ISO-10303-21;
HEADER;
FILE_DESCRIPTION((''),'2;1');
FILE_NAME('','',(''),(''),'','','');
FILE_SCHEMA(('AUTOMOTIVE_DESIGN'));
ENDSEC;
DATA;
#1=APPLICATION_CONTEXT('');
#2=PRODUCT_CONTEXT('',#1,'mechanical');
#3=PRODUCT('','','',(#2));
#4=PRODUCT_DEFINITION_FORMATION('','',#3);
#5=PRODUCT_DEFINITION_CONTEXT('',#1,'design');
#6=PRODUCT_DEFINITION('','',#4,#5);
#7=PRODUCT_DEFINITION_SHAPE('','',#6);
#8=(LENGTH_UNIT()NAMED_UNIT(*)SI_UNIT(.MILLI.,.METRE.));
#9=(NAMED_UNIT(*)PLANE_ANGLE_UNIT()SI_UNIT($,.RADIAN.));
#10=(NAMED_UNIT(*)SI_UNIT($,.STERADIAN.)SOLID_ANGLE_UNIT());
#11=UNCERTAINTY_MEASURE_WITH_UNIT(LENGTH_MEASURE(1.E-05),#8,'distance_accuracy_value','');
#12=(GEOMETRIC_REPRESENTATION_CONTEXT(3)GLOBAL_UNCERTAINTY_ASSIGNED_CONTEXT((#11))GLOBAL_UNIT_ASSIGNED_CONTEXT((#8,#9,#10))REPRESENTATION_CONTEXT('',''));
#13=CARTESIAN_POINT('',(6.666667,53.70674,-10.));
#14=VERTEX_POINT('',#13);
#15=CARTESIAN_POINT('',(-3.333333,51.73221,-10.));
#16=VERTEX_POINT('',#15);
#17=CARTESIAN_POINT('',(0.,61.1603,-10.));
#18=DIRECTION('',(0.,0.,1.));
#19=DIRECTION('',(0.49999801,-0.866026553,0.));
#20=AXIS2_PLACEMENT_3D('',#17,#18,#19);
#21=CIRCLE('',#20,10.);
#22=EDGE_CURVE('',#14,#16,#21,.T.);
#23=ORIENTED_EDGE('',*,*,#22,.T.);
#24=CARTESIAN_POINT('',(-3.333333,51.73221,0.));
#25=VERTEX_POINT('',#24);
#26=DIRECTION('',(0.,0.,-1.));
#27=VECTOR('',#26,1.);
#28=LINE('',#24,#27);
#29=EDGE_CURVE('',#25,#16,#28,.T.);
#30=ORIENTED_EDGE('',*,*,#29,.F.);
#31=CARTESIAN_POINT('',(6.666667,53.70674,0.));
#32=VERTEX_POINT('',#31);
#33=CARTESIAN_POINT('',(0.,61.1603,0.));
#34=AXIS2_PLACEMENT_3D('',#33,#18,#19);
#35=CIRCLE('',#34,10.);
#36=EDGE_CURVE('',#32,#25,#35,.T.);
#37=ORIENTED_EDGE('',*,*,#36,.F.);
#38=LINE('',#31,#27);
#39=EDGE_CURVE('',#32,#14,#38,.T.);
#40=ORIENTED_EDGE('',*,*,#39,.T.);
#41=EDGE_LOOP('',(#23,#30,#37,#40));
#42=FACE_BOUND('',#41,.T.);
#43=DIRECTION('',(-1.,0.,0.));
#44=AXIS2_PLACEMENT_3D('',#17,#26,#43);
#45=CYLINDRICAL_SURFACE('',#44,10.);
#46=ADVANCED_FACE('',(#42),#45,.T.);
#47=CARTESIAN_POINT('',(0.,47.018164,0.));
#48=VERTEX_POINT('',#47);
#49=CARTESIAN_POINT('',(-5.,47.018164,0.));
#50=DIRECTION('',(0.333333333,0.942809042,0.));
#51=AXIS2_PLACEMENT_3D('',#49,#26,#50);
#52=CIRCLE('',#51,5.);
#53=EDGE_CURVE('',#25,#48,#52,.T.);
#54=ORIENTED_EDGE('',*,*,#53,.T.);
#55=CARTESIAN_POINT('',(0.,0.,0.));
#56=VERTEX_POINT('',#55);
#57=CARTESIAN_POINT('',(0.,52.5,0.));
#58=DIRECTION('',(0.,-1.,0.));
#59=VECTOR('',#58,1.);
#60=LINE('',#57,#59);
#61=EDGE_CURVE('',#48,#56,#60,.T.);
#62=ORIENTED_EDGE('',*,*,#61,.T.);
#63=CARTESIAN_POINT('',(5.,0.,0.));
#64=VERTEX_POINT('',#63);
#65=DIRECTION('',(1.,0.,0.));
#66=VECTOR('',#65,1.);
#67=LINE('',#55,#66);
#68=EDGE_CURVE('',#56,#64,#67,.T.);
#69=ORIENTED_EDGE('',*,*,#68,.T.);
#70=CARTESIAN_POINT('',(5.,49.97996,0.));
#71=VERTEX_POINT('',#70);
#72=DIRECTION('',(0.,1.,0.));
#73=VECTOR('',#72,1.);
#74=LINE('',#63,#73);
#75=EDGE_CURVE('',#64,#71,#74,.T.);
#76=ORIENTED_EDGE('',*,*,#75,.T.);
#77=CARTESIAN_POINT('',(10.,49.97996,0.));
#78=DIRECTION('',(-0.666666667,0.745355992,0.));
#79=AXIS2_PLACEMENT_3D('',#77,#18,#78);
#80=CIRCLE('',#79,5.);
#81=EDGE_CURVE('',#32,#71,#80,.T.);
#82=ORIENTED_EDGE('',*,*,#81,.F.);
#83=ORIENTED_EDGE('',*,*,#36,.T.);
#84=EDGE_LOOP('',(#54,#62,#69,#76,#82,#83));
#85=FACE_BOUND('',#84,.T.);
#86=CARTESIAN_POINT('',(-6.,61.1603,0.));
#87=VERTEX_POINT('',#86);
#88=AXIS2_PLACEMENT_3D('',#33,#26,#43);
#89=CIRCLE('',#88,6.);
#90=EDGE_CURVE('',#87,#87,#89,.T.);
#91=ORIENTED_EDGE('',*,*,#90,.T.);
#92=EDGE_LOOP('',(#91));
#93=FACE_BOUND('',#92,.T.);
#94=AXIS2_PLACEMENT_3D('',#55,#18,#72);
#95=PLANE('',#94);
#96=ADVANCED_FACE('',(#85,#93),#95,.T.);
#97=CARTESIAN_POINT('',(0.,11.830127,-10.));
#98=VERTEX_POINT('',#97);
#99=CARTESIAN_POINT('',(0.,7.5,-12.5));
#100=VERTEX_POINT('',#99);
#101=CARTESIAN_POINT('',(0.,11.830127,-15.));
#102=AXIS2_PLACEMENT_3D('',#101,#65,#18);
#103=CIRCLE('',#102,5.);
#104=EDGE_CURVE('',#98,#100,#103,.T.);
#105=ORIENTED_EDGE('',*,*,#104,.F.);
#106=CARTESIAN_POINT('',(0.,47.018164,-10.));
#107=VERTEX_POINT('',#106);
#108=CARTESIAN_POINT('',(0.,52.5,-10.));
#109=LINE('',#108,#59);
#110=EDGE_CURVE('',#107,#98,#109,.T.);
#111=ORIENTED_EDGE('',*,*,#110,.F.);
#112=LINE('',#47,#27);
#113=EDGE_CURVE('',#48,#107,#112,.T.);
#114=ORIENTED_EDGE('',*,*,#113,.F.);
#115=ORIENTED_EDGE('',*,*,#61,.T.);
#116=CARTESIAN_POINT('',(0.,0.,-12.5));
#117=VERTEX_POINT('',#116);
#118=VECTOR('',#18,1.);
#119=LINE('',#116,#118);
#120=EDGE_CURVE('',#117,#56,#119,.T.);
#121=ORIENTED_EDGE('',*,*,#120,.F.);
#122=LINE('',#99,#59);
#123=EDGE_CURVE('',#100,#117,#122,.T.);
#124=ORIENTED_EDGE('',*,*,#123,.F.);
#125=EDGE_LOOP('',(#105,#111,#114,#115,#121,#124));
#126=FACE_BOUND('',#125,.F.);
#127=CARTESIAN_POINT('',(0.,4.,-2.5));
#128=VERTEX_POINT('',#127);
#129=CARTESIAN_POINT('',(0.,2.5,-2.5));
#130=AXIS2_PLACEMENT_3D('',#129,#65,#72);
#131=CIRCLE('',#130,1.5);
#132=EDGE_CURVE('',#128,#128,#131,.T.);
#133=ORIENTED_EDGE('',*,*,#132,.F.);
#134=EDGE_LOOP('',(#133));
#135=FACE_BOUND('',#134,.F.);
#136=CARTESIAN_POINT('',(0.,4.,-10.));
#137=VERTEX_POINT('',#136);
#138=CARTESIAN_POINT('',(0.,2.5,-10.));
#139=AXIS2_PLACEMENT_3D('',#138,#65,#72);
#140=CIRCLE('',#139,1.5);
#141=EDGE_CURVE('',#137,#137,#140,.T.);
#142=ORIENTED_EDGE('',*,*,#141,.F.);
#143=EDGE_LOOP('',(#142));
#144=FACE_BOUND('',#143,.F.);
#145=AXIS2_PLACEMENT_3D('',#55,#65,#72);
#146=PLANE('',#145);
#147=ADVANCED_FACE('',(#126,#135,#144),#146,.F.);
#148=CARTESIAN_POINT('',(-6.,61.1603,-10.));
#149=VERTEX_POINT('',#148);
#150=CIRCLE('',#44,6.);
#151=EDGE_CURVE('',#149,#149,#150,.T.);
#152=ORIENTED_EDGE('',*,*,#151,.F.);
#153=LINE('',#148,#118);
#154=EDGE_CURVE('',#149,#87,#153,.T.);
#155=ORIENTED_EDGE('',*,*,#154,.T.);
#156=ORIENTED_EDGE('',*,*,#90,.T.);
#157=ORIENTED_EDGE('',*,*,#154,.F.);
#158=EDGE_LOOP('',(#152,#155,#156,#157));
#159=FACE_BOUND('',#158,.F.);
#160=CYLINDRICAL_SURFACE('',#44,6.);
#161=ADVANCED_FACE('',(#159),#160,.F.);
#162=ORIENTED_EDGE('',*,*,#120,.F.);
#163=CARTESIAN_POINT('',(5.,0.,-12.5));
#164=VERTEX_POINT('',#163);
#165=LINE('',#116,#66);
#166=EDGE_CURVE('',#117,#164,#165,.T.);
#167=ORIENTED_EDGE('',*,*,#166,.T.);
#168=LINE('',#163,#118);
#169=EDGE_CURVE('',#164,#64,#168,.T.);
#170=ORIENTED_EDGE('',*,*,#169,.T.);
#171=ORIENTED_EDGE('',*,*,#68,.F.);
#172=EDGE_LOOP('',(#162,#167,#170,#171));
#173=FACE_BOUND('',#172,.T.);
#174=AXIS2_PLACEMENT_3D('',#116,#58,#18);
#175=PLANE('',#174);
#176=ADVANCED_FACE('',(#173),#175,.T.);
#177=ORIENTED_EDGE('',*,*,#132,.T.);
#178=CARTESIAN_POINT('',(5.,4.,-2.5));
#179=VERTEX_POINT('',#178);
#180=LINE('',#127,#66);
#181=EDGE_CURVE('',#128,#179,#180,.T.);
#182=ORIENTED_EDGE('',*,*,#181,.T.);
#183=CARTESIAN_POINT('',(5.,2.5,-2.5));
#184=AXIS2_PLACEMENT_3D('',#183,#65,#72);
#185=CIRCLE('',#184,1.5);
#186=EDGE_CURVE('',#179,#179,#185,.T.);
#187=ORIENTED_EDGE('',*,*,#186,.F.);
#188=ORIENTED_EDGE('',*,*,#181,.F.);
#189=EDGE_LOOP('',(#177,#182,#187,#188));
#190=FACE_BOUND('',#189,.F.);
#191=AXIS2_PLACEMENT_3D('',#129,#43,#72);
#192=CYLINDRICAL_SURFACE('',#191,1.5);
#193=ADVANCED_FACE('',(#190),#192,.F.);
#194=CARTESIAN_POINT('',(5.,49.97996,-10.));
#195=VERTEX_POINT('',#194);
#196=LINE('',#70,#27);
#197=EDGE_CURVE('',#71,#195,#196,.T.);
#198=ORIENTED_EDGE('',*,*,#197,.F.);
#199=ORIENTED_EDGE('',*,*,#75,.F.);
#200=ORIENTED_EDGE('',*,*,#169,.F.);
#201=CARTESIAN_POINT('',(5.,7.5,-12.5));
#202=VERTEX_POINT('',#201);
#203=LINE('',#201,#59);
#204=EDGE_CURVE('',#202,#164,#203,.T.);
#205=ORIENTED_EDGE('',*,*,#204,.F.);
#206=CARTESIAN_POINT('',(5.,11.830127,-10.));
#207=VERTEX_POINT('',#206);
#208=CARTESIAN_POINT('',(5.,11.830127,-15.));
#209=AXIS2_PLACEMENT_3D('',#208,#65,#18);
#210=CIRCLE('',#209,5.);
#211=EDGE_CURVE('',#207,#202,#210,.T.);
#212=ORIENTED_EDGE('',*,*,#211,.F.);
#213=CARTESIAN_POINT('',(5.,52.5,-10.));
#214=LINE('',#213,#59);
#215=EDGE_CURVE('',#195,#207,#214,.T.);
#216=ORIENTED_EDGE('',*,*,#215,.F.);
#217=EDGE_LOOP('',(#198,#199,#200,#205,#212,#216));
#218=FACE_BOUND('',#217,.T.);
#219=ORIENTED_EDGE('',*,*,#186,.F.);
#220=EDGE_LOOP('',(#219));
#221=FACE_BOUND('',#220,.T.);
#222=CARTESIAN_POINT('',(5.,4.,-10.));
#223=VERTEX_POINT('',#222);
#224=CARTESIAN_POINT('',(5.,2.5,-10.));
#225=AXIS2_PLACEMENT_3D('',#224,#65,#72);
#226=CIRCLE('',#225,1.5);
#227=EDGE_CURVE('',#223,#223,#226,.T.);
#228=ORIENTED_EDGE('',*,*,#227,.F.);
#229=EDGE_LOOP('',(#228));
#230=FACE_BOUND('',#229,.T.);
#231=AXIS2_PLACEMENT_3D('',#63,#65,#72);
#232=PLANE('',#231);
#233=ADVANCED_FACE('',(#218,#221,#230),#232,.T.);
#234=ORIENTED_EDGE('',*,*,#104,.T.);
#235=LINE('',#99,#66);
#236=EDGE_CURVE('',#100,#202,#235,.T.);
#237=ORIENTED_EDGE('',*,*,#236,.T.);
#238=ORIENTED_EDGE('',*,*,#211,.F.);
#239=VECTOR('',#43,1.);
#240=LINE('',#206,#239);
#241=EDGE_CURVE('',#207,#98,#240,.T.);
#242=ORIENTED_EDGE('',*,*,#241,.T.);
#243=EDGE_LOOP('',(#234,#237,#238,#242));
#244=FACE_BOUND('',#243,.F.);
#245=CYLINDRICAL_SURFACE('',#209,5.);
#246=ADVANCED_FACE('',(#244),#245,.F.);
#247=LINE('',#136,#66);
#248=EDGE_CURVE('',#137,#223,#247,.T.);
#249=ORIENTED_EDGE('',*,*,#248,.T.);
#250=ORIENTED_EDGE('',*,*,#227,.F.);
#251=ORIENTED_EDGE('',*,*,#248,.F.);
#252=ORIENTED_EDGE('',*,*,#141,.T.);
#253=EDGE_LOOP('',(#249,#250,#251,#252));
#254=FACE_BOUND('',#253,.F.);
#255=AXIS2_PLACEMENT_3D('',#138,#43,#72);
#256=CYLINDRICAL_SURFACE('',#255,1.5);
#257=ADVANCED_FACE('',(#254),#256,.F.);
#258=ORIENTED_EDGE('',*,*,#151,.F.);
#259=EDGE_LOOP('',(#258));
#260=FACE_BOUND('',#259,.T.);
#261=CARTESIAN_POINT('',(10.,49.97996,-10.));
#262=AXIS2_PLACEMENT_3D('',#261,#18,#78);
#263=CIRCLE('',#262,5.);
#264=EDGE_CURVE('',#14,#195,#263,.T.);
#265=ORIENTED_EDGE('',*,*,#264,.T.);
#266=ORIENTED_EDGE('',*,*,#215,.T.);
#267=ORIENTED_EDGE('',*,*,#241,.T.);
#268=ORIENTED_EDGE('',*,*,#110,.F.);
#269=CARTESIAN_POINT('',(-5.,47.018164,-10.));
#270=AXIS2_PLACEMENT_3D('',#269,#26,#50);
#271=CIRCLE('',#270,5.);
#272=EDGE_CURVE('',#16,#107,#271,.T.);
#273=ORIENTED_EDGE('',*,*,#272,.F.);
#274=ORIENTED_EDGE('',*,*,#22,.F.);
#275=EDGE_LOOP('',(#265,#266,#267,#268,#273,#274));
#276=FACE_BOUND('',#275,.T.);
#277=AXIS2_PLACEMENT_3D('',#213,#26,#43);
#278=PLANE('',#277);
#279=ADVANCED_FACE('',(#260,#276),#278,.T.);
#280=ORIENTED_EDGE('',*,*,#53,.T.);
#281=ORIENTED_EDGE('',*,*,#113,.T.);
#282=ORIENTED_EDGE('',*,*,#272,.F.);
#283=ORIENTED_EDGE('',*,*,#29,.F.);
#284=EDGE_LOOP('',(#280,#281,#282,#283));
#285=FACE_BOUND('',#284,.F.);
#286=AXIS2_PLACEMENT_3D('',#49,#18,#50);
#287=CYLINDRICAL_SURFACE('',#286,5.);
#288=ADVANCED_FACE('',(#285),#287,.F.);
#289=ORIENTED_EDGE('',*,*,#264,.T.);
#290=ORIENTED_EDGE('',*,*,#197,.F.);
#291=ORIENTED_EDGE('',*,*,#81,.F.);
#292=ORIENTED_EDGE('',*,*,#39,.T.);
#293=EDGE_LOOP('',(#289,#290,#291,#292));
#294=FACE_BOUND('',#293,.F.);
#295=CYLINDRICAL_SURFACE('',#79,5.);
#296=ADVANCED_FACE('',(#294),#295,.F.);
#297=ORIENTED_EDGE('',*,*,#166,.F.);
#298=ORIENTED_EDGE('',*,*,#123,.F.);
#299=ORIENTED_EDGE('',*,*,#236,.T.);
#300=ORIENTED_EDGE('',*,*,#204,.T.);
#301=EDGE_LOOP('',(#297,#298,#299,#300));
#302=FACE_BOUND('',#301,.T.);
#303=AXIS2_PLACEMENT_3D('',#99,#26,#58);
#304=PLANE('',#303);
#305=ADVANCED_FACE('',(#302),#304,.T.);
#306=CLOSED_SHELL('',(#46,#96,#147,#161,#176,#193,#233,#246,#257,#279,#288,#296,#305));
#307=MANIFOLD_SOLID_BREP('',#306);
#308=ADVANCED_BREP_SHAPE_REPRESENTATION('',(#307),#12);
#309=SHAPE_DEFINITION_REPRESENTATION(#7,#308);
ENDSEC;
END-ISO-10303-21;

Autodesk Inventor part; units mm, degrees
ref_plane "YZ Plane" through (0, 0, 0) normal (1, 0, 0) x (0, 1, 0)
ref_plane "XZ Plane" through (0, 0, 0) normal (0, 1, 0) x (-1, 0, 0)
ref_plane "XY Plane" through (0, 0, 0) normal (0, 0, 1) x (1, 0, 0)
sketch "Sketch1" plane through (0, 0, 0) normal (1, 0, 0) x (0, 1, 0)
  line L0 (0, 0) -> (7.5, 0)
  line L1 (7.5, 0) -> (7.5, -12.5)
  line L2 (7.5, -12.5) -> (0, -12.5)
  line L3 (0, -12.5) -> (0, 0)
  circle A0 centre (2.5, -2.5) radius 1.5
  circle A1 centre (2.5, -10) radius 1.5
  line L4 (2.5, -2.5) -> (2.5, -10) construction
  line L5 (7.5, -12.5) -> (7.5, 0)
  point P0 (2.5, -6.25)
  point P1 (7.5, -6.25)
  point P2 (3.75, -12.5)
  dimension "d0" = 12.5
  dimension "d1" = 7.5
  dimension "d2" = 3
  dimension "d3" = 7.5
  dimension "d4" = 5
extrude "Extrusion1" add sketch "Sketch1" along normal blind 5
sketch "Sketch2" plane through (5, 0, 0) normal (1, 0, 0) x (0, 0, -1)
  line L0 (12.5, 7.5) -> (0, 7.5) projected
  line L1 (0, 7.5) -> (0, 0) projected
  line L2 (0, 7.5) -> (0, 52.5)
  line L3 (0, 52.5) -> (10, 52.5)
  line L4 (10, 52.5) -> (10, 7.5)
  dimension "d7" = 10
  dimension "d8" = 45
extrude "Extrusion2" add sketch "Sketch2" against normal blind 5
sketch "Sketch3" plane through (5, 7.5, -10) normal (0, 0, -1) x (-1, 0, 0)
  circle A0 centre (5, 53.6603) radius 10
  circle A1 centre (5, 53.6603) radius 6
  line L0 (0, 45) -> (5, 45) projected
  point P0 (5, -7.5)
  point P1 (2.5, 45)
  dimension "d11" = 12
  dimension "d12" = 4
extrude "Extrusion3" add sketch "Sketch3" against normal up to surface (10 mm away)
fillet "Fillet1" radius 5 3 edges at (5, 52.5, -5) (0, 51.1603, -5) (2.5, 7.5, -10)
properties part number "LJ12_Adapter"
